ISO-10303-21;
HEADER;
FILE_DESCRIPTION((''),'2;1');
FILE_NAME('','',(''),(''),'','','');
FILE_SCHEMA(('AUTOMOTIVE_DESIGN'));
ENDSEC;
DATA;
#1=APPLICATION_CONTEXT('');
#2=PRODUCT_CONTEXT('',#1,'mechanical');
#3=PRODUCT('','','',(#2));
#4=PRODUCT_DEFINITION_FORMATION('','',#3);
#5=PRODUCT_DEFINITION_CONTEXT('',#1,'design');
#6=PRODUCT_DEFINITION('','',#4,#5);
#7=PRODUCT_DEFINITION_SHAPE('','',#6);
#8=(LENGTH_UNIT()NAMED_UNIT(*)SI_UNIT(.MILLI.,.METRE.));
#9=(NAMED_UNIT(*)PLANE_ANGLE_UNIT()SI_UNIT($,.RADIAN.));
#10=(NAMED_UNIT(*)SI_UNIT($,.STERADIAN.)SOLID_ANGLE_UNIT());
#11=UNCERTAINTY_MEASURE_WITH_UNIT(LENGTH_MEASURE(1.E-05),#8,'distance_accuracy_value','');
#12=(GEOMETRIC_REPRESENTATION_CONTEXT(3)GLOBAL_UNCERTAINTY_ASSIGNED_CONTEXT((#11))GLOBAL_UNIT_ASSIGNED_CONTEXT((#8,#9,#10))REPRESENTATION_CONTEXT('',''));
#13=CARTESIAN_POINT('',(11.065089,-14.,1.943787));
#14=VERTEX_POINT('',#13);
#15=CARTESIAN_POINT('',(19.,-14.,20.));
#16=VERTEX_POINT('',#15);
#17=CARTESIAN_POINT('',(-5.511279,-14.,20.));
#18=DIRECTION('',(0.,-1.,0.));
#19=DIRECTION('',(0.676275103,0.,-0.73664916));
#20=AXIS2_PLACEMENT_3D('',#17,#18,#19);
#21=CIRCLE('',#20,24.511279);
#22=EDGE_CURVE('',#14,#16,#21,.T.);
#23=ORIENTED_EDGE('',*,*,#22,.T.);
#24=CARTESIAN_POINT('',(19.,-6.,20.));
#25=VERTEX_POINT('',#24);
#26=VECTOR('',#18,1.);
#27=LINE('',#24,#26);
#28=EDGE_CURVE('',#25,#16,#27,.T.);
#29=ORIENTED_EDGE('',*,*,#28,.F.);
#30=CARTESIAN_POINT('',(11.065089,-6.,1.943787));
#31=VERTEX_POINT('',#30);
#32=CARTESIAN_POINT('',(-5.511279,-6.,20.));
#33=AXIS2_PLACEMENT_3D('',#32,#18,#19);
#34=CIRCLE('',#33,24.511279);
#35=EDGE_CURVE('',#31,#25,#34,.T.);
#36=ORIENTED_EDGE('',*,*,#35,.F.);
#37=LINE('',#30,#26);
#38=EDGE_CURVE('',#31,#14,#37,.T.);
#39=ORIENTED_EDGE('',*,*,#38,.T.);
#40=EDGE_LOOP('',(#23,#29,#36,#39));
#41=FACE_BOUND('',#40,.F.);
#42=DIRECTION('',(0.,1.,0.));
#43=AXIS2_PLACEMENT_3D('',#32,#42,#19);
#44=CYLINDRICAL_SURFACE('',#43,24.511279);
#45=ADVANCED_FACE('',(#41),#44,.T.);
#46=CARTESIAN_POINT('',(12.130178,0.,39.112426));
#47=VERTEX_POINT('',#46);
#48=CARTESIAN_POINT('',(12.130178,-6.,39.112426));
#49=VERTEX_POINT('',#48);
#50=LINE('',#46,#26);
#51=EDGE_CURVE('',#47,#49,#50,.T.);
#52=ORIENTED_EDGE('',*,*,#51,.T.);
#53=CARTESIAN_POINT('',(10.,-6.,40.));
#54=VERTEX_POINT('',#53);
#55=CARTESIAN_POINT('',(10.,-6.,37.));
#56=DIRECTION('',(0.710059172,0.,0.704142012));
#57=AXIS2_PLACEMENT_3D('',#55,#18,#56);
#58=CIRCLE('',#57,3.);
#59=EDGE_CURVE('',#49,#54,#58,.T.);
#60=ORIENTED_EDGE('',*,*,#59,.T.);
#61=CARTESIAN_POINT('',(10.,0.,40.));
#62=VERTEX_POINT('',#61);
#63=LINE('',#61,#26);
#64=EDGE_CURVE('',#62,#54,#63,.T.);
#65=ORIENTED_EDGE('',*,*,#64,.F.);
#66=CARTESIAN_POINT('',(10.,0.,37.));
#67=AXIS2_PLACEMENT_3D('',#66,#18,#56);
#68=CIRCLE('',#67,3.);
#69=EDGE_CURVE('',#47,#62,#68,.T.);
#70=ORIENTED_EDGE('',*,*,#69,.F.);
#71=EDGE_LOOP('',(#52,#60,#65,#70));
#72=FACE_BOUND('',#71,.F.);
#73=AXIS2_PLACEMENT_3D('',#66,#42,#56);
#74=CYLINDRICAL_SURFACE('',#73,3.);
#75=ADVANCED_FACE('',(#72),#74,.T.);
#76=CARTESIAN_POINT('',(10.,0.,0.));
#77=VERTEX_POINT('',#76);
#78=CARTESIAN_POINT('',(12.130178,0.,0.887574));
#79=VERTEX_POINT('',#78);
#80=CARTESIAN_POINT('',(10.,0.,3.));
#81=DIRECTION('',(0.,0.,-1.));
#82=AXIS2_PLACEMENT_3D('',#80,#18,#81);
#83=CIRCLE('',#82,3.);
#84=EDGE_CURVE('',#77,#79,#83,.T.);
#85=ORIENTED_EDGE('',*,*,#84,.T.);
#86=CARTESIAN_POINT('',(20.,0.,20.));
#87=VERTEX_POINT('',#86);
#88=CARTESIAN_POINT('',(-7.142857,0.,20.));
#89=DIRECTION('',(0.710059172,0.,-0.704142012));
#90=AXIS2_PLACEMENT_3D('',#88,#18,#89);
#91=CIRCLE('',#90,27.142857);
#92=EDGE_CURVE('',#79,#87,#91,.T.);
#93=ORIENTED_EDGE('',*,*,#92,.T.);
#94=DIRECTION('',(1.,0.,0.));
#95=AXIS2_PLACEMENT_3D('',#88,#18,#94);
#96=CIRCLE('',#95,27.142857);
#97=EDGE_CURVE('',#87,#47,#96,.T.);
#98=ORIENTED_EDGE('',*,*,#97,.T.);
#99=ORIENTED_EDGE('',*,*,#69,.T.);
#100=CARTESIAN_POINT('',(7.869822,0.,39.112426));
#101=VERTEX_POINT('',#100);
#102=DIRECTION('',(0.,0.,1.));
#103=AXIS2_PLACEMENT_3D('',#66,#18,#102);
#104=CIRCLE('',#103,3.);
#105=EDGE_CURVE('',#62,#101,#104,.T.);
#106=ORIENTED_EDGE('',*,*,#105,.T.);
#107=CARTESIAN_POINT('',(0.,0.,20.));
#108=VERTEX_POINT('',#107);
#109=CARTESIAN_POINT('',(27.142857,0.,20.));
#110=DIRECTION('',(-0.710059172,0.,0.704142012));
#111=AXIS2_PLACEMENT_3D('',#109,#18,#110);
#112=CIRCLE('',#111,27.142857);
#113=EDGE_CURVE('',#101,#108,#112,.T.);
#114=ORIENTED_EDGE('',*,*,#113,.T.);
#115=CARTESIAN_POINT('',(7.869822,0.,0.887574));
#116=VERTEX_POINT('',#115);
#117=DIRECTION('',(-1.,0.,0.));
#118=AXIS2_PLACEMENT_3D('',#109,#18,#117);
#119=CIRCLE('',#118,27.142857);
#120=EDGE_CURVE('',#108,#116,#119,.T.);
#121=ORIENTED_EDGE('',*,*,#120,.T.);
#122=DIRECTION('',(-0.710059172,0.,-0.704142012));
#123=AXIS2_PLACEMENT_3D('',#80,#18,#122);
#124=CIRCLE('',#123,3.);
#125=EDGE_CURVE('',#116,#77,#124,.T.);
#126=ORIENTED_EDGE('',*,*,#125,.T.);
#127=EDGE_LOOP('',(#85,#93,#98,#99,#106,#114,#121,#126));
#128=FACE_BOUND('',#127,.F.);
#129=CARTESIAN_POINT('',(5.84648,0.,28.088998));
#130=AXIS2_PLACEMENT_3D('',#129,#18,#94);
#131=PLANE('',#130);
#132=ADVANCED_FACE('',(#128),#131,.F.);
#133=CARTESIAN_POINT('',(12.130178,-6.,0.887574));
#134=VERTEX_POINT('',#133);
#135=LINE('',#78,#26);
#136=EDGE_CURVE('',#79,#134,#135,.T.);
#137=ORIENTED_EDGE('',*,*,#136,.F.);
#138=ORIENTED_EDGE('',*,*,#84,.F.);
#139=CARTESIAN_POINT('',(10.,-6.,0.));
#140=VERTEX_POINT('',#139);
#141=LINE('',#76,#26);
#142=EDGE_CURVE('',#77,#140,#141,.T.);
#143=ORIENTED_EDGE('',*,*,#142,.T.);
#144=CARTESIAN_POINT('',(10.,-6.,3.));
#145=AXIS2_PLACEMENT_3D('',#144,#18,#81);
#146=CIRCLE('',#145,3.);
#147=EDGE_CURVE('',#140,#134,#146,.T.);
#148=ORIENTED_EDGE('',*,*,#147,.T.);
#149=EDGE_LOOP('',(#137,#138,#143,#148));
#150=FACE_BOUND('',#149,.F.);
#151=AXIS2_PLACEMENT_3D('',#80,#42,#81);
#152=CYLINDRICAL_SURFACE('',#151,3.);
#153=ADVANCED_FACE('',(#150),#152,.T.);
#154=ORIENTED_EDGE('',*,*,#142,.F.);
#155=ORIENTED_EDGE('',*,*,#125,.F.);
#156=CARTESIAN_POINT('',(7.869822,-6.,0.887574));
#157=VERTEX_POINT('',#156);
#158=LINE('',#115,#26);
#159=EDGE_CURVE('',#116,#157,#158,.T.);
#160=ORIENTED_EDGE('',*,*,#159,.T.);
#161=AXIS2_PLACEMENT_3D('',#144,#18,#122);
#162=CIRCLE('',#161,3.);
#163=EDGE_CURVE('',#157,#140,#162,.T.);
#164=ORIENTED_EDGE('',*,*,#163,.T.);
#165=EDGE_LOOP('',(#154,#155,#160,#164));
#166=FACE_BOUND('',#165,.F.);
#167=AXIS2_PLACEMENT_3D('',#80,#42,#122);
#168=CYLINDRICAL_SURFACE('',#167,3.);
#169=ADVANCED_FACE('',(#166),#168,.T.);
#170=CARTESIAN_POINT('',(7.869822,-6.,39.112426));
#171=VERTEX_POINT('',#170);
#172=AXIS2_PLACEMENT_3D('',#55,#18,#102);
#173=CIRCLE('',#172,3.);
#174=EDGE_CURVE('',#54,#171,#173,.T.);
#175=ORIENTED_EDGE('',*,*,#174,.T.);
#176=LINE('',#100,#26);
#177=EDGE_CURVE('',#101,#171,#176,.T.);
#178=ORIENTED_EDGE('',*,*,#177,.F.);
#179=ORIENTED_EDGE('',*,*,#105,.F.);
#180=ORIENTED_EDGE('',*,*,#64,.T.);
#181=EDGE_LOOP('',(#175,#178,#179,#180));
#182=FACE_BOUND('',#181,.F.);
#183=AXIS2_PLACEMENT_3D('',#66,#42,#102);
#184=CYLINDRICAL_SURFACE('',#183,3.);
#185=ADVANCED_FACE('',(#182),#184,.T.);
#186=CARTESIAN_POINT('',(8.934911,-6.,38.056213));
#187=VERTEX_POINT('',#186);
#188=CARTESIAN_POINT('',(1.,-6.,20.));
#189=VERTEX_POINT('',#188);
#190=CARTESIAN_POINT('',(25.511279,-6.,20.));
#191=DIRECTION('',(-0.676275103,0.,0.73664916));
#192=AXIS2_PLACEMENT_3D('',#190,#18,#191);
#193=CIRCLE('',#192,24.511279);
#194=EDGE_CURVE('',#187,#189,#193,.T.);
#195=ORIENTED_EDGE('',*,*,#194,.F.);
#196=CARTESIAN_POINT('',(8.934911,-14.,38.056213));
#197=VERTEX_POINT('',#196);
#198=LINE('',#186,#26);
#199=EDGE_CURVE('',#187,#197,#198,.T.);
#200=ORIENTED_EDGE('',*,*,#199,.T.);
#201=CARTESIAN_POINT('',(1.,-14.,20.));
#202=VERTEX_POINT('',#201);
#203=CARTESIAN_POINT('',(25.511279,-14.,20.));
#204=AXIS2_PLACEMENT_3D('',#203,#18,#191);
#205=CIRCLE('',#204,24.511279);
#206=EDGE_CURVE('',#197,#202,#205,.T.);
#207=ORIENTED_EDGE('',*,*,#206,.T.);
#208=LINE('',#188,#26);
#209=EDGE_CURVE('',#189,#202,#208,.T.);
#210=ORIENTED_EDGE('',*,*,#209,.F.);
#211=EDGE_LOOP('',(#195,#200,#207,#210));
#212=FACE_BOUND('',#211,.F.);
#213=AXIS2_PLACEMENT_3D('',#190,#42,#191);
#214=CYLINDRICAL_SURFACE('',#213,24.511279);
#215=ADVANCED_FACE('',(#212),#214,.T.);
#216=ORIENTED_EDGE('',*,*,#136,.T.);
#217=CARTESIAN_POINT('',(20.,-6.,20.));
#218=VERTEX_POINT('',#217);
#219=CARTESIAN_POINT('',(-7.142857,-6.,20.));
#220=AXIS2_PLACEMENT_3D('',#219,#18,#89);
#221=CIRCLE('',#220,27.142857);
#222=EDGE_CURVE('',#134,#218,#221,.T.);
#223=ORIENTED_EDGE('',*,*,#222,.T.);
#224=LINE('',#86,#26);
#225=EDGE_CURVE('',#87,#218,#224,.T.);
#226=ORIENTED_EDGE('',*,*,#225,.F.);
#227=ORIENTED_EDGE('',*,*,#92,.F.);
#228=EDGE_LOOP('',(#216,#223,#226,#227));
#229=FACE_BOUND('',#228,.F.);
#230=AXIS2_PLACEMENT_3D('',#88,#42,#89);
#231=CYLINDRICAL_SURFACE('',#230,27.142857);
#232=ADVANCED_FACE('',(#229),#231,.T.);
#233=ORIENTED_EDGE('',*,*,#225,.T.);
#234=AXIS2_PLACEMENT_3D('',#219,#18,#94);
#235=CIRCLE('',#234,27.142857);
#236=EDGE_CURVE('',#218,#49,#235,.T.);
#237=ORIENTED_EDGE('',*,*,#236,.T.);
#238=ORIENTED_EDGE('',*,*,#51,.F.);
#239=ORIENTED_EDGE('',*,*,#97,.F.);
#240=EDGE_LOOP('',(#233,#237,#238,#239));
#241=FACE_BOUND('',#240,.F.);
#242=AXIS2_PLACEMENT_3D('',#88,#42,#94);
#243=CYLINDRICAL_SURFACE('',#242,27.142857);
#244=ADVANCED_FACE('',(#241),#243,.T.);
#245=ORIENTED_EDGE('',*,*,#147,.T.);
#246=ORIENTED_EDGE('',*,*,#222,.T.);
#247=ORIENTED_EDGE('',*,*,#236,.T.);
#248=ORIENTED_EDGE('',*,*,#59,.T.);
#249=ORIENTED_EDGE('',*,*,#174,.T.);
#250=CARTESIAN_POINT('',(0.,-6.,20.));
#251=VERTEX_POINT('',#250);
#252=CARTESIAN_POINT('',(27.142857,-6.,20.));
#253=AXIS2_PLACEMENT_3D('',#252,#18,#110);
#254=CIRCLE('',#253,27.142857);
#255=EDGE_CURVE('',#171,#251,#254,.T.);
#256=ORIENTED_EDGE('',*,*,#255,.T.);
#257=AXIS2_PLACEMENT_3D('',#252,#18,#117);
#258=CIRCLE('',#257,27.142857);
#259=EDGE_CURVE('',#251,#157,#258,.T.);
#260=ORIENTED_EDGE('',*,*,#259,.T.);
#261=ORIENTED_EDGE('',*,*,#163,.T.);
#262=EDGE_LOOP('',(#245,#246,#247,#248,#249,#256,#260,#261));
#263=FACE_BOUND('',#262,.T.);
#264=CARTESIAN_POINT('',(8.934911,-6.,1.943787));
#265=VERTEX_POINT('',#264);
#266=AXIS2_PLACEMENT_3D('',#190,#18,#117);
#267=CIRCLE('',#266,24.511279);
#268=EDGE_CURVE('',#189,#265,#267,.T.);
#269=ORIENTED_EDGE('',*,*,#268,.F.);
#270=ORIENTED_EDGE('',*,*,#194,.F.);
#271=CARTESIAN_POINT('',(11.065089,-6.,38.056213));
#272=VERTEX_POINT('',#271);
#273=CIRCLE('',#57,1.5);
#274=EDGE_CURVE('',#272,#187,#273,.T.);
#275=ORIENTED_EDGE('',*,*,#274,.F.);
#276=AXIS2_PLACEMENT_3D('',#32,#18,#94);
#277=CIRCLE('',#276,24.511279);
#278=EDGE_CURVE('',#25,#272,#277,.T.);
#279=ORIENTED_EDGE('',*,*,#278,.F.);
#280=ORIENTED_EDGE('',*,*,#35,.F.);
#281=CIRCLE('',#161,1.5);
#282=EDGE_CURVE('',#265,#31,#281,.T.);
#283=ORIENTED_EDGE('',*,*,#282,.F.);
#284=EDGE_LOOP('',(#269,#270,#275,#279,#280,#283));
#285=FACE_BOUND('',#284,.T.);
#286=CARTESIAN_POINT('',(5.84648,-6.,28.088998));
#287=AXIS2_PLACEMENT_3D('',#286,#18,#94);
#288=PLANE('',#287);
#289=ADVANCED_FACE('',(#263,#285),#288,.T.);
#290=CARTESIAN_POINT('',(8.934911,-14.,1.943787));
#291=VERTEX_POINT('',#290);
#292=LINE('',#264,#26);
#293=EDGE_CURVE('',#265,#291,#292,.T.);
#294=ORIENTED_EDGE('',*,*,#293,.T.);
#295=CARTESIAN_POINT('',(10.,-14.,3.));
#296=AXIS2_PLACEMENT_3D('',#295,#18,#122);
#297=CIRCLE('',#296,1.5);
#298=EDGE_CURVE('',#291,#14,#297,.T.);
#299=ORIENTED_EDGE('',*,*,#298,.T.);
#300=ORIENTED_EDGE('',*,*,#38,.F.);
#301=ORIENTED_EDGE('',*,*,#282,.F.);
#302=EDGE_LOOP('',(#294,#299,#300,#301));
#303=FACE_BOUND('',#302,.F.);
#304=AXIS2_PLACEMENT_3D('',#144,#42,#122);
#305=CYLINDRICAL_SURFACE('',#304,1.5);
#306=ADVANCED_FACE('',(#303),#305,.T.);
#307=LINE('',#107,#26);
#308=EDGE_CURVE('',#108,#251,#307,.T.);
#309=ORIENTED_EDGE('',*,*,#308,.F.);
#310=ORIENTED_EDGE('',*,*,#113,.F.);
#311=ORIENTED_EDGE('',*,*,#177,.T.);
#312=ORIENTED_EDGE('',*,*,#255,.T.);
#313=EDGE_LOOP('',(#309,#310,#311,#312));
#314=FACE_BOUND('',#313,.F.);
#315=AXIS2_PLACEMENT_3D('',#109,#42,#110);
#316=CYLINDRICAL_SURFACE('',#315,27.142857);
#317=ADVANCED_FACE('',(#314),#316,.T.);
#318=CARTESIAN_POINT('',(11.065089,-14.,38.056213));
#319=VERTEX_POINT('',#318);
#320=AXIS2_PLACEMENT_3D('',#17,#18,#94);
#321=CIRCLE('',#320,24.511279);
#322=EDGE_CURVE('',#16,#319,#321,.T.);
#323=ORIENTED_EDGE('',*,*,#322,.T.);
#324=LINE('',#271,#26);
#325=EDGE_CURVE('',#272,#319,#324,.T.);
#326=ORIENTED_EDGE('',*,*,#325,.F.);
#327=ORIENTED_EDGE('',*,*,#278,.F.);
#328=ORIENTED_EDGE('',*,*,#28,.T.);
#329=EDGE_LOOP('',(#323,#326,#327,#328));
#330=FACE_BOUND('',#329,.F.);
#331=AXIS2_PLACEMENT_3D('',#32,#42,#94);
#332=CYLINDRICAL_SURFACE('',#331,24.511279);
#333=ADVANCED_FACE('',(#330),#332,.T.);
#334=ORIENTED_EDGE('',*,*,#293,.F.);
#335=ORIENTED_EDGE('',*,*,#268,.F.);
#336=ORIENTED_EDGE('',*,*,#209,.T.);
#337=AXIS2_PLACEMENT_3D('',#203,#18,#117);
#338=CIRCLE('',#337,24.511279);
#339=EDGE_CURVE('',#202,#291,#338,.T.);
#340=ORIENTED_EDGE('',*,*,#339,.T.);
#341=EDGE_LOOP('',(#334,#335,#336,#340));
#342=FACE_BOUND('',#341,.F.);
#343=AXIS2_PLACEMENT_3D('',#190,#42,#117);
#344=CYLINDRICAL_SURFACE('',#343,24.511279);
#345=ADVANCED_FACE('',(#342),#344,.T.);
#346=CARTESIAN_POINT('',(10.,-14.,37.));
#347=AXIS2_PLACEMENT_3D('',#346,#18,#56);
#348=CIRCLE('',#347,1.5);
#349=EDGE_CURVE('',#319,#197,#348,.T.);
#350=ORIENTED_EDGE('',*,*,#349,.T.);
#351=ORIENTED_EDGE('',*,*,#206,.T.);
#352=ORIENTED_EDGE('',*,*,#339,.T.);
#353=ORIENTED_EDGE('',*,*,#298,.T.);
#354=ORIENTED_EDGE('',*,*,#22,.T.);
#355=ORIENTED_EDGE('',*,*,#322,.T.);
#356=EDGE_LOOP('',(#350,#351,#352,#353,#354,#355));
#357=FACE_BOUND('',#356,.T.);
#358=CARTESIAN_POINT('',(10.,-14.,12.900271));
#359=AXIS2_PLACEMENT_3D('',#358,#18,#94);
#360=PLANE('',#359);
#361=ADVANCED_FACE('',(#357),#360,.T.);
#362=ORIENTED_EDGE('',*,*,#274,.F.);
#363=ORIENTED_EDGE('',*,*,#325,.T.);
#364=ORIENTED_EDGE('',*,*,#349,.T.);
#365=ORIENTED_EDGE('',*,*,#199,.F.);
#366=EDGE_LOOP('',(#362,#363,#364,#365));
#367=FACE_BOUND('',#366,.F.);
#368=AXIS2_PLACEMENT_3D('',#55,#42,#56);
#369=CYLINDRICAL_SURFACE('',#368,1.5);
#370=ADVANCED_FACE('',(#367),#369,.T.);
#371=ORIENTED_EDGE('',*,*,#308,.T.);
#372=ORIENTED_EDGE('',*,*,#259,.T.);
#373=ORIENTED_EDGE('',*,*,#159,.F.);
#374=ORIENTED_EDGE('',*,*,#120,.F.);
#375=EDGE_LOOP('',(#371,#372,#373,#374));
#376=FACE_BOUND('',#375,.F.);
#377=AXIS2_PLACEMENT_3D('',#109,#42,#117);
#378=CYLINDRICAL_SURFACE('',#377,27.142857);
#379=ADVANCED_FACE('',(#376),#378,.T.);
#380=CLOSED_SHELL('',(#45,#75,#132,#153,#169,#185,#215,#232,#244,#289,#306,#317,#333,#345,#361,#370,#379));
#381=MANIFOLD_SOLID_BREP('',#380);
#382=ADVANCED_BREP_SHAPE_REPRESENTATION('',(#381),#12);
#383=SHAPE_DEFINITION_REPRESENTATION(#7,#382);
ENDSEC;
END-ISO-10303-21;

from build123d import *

# Parameters (mm, degrees)
F1_DEPTH = 6
F3_DEPTH = 8


with BuildPart() as f1:
    # F0 (on Front) → F1 (new body)
    with BuildSketch(Plane.XZ):
        with BuildLine():
            ThreePointArc((7.8698224852, 39.1124260355), (2.0444516128, 30.3346375712), (0, 20))
            Line((0, 20), (10, 20))
            Line((10, 20), (10, 34))
            ThreePointArc((10, 34), (7.2307692308, 35.8461538462), (7.8698224852, 39.1124260355))
        make_face()
        with BuildLine():
            Line((10, 34), (10, 20))
            Line((10, 20), (20, 20))
            ThreePointArc((20, 20), (17.9555483872, 30.3346375712), (12.1301775148, 39.1124260355))
            ThreePointArc((12.1301775148, 39.1124260355), (12.7740342954, 38.1422494158), (13, 37))
            ThreePointArc((13, 37), (12.1213203436, 34.8786796564), (10, 34))
        make_face()
        with BuildLine():
            Line((10, 20), (0, 20))
            ThreePointArc((0, 20), (2.0444516128, 9.6653624288), (7.8698224852, 0.8875739645))
            ThreePointArc((7.8698224852, 0.8875739645), (7.2307692308, 4.1538461538), (10, 6))
            Line((10, 6), (10, 20))
        make_face()
        with BuildLine():
            Line((10, 20), (10, 6))
            ThreePointArc((10, 6), (12.1213203436, 5.1213203436), (13, 3))
            ThreePointArc((13, 3), (12.7740342954, 1.8577505842), (12.1301775148, 0.8875739645))
            ThreePointArc((12.1301775148, 0.8875739645), (17.9555483872, 9.6653624288), (20, 20))
            Line((20, 20), (10, 20))
        make_face()
        with BuildLine():
            ThreePointArc((7.8698224852, 0.8875739645), (8.8461538462, 0.2307692308), (10, 0))
            Line((10, 0), (10, 6))
            ThreePointArc((10, 6), (7.2307692308, 4.1538461538), (7.8698224852, 0.8875739645))
        make_face()
        with BuildLine():
            Line((10, 6), (10, 0))
            ThreePointArc((10, 0), (11.1538461538, 0.2307692308), (12.1301775148, 0.8875739645))
            ThreePointArc((12.1301775148, 0.8875739645), (12.7740342954, 1.8577505842), (13, 3))
            ThreePointArc((13, 3), (12.1213203436, 5.1213203436), (10, 6))
        make_face()
        with BuildLine():
            ThreePointArc((10, 40), (8.8461538462, 39.7692307692), (7.8698224852, 39.1124260355))
            ThreePointArc((7.8698224852, 39.1124260355), (7.2307692308, 35.8461538462), (10, 34))
            Line((10, 34), (10, 40))
        make_face()
        with BuildLine():
            ThreePointArc((12.1301775148, 39.1124260355), (11.1538461538, 39.7692307692), (10, 40))
            Line((10, 40), (10, 34))
            ThreePointArc((10, 34), (12.1213203436, 34.8786796564), (13, 37))
            ThreePointArc((13, 37), (12.7740342954, 38.1422494158), (12.1301775148, 39.1124260355))
        make_face()
    extrude(amount=F1_DEPTH)

    # F2 (on face) → F3 (join)
    with BuildSketch(Plane.XZ.offset(6)):
        with BuildLine():
            ThreePointArc((8.9349112426, 1.9437869822), (10, 1.5), (11.0650887574, 1.9437869822))
            ThreePointArc((11.0650887574, 1.9437869822), (16.5685312395, 10.2364871367), (18.5, 20))
            Line((18.5, 20), (2.4724225514, 20))
            Line((2.4724225514, 20), (1.5, 20))
            ThreePointArc((1.5, 20), (3.4314687605, 10.2364871367), (8.9349112426, 1.9437869822))
        make_face()
        with BuildLine():
            Line((2.4724225514, 20), (18.5, 20))
            ThreePointArc((18.5, 20), (16.5685312395, 29.7635128633), (11.0650887574, 38.0562130178))
            ThreePointArc((11.0650887574, 38.0562130178), (10, 38.5), (8.9349112426, 38.0562130178))
            ThreePointArc((8.9349112426, 38.0562130178), (3.4314687605, 29.7635128633), (1.5, 20))
            Line((1.5, 20), (2.4724225514, 20))
        make_face()
        with BuildLine():
            ThreePointArc((18.5, 20), (16.5685312395, 10.2364871367), (11.0650887574, 1.9437869822))
            ThreePointArc((11.0650887574, 1.9437869822), (16.9287608071, 10.1385897944), (19, 20))
            Line((19, 20), (18.5, 20))
        make_face()
        with BuildLine():
            ThreePointArc((11.0650887574, 38.0562130178), (16.5685312395, 29.7635128633), (18.5, 20))
            Line((18.5, 20), (19, 20))
            ThreePointArc((19, 20), (16.9287608071, 29.8614102056), (11.0650887574, 38.0562130178))
        make_face()
        with BuildLine():
            ThreePointArc((1, 20), (3.0712391929, 10.1385897944), (8.9349112426, 1.9437869822))
            ThreePointArc((8.9349112426, 1.9437869822), (3.4314687605, 10.2364871367), (1.5, 20))
            Line((1.5, 20), (1, 20))
        make_face()
        with BuildLine():
            Line((1, 20), (1.5, 20))
            ThreePointArc((1.5, 20), (3.4314687605, 29.7635128633), (8.9349112426, 38.0562130178))
            ThreePointArc((8.9349112426, 38.0562130178), (3.0712391929, 29.8614102056), (1, 20))
        make_face()
    extrude(amount=F3_DEPTH)


solid = f1.part
